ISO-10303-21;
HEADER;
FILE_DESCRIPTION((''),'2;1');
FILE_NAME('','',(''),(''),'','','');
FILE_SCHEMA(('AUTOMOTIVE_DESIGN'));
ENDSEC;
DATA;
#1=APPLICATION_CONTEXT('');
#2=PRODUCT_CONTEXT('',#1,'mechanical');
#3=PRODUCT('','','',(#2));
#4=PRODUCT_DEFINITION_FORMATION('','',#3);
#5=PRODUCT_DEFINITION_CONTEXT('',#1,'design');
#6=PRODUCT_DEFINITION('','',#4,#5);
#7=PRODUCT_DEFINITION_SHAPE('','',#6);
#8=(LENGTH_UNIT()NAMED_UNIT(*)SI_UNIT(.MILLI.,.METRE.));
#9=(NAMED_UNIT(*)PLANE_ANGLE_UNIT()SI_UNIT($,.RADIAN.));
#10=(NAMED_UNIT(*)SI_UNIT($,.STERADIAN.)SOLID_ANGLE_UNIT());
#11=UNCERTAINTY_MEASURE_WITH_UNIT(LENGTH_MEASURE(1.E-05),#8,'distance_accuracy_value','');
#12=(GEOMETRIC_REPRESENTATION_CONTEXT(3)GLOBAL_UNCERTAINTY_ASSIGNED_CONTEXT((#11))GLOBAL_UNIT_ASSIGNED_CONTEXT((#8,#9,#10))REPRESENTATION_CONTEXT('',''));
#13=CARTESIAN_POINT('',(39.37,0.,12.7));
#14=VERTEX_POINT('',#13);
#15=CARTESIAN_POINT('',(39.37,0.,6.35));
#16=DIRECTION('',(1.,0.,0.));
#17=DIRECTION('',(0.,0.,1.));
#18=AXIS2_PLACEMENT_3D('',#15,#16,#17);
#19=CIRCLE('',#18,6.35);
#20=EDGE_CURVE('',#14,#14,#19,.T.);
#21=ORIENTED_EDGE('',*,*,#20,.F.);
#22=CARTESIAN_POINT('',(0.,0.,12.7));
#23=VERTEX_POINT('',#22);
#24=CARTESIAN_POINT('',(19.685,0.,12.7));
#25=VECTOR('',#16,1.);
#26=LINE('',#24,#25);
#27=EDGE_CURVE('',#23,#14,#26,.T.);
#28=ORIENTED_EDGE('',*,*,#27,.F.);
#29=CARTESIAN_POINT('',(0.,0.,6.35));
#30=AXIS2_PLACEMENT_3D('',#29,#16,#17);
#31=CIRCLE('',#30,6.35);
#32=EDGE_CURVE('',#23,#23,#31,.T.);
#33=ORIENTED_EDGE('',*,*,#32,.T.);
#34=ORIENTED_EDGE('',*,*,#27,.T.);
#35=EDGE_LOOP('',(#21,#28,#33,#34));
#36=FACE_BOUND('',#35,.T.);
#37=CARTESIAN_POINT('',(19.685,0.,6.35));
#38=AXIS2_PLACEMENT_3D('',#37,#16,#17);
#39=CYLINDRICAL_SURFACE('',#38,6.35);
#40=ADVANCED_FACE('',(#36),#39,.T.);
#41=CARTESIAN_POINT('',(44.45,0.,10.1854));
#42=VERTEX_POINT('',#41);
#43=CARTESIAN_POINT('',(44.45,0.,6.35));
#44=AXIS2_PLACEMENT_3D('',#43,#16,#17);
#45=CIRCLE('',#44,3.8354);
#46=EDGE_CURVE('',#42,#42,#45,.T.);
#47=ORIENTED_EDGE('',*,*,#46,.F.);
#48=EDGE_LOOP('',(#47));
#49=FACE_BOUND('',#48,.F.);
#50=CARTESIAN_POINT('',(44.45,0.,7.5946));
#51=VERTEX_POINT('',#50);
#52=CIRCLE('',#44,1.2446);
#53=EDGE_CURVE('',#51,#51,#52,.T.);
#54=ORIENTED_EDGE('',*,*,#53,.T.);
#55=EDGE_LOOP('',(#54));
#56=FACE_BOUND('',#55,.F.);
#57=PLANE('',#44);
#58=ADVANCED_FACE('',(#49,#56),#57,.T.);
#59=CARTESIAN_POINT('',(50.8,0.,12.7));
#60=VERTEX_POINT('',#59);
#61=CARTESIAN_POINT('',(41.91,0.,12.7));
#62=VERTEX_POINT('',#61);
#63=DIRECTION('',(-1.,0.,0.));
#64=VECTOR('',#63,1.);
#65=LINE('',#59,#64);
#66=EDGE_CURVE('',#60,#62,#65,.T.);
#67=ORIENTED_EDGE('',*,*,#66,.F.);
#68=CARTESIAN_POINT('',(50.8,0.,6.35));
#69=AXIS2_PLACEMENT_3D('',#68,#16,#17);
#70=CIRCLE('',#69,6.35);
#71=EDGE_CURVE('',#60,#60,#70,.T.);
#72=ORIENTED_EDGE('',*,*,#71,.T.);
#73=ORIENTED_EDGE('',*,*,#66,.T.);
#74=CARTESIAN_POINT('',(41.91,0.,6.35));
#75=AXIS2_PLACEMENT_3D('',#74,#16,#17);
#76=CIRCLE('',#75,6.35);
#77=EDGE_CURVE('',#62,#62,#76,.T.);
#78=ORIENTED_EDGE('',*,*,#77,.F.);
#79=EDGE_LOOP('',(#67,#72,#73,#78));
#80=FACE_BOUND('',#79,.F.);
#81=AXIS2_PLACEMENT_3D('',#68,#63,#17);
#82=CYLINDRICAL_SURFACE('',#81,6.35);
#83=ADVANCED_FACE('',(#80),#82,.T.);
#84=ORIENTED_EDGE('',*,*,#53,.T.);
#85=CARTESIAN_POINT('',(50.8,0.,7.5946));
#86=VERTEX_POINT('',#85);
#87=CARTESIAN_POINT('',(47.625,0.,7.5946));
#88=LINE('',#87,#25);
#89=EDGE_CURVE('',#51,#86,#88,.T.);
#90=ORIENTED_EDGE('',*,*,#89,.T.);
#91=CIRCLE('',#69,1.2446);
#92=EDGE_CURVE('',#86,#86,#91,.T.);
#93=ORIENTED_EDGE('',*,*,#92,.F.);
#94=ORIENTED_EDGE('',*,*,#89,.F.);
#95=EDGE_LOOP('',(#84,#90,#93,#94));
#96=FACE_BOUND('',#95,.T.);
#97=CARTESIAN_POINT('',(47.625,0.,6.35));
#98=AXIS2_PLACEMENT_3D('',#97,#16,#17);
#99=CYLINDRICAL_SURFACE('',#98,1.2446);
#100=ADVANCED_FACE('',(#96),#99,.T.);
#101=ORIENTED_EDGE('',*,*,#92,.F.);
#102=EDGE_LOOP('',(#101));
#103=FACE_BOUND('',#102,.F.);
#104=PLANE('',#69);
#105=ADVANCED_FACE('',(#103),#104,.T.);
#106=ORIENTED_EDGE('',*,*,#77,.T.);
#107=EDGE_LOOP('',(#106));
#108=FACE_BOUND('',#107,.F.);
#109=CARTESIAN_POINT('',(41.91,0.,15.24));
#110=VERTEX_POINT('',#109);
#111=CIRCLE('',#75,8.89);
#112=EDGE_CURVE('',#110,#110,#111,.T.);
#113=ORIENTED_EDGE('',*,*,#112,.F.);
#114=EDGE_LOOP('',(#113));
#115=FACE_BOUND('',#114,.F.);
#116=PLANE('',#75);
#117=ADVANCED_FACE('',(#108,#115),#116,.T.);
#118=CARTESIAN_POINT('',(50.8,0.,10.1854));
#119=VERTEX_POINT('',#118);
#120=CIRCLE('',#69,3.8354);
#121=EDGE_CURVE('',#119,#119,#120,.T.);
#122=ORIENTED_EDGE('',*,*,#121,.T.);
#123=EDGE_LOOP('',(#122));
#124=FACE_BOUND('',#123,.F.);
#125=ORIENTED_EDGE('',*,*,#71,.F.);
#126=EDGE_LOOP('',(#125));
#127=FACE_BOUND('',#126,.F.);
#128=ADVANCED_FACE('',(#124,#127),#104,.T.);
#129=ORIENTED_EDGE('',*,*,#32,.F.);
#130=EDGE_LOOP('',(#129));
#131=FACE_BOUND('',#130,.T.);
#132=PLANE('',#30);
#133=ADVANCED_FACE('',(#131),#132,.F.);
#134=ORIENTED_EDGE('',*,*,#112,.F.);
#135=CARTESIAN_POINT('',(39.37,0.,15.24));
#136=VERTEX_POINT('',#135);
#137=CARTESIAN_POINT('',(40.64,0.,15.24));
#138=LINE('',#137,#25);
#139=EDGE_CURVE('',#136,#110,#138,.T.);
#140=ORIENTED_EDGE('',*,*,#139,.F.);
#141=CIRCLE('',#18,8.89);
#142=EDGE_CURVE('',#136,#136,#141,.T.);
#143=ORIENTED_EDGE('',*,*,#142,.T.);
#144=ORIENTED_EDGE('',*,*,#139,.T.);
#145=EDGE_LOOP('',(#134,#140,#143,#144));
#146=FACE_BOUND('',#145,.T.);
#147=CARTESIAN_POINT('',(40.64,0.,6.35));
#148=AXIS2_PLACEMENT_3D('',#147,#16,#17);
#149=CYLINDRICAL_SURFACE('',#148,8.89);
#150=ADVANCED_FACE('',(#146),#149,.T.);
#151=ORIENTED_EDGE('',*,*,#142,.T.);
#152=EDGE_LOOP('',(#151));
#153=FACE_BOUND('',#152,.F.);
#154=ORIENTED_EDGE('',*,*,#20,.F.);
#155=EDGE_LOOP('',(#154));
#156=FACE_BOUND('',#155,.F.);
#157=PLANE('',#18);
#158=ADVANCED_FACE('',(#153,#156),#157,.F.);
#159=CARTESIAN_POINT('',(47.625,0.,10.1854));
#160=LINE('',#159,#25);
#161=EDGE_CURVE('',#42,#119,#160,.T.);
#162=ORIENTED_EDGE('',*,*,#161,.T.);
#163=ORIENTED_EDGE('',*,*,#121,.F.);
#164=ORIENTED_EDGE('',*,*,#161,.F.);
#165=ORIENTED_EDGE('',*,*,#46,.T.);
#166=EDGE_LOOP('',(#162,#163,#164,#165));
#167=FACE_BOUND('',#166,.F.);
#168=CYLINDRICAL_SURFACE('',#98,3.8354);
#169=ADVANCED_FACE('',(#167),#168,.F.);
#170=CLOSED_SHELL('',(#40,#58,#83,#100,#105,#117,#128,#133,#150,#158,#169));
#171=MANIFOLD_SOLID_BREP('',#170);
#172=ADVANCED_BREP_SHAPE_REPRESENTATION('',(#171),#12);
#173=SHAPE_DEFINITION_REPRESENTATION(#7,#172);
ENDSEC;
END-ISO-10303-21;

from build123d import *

# Parameters (mm, degrees)
F0_W   = 2.54
F0_H   = 6.35
F0_H_2 = 2.54
F0_W_2 = 39.37
F0_W_3 = 6.35
F0_H_3 = 2.5146
F0_H_4 = 1.2446


# Not quite as in the source:
# - a feature names something its author has since deleted; it is built from what else it names


with BuildPart() as f1:
    # F0 (on Front) → F1 (revolve)
    with BuildSketch(Plane.XZ):
        Polygon((44.45, 12.7), (41.91, 12.7), (41.91, 6.35), (44.45, 6.35), (44.45, 7.5946), (44.45, 10.1854), align=None)
        with Locations((40.64, 9.525)):
            Rectangle(F0_W, F0_H)
        with Locations((40.64, 13.97)):
            Rectangle(F0_W, F0_H_2)
        with Locations((19.685, 9.525)):
            Rectangle(F0_W_2, F0_H)
        with Locations((47.625, 11.4427)):
            Rectangle(F0_W_3, F0_H_3)
        with Locations((47.625, 6.9723)):
            Rectangle(F0_W_3, F0_H_4)
    revolve(axis=Axis((19.685, 0, 6.35), (1, 0, 0)))


solid = f1.part
